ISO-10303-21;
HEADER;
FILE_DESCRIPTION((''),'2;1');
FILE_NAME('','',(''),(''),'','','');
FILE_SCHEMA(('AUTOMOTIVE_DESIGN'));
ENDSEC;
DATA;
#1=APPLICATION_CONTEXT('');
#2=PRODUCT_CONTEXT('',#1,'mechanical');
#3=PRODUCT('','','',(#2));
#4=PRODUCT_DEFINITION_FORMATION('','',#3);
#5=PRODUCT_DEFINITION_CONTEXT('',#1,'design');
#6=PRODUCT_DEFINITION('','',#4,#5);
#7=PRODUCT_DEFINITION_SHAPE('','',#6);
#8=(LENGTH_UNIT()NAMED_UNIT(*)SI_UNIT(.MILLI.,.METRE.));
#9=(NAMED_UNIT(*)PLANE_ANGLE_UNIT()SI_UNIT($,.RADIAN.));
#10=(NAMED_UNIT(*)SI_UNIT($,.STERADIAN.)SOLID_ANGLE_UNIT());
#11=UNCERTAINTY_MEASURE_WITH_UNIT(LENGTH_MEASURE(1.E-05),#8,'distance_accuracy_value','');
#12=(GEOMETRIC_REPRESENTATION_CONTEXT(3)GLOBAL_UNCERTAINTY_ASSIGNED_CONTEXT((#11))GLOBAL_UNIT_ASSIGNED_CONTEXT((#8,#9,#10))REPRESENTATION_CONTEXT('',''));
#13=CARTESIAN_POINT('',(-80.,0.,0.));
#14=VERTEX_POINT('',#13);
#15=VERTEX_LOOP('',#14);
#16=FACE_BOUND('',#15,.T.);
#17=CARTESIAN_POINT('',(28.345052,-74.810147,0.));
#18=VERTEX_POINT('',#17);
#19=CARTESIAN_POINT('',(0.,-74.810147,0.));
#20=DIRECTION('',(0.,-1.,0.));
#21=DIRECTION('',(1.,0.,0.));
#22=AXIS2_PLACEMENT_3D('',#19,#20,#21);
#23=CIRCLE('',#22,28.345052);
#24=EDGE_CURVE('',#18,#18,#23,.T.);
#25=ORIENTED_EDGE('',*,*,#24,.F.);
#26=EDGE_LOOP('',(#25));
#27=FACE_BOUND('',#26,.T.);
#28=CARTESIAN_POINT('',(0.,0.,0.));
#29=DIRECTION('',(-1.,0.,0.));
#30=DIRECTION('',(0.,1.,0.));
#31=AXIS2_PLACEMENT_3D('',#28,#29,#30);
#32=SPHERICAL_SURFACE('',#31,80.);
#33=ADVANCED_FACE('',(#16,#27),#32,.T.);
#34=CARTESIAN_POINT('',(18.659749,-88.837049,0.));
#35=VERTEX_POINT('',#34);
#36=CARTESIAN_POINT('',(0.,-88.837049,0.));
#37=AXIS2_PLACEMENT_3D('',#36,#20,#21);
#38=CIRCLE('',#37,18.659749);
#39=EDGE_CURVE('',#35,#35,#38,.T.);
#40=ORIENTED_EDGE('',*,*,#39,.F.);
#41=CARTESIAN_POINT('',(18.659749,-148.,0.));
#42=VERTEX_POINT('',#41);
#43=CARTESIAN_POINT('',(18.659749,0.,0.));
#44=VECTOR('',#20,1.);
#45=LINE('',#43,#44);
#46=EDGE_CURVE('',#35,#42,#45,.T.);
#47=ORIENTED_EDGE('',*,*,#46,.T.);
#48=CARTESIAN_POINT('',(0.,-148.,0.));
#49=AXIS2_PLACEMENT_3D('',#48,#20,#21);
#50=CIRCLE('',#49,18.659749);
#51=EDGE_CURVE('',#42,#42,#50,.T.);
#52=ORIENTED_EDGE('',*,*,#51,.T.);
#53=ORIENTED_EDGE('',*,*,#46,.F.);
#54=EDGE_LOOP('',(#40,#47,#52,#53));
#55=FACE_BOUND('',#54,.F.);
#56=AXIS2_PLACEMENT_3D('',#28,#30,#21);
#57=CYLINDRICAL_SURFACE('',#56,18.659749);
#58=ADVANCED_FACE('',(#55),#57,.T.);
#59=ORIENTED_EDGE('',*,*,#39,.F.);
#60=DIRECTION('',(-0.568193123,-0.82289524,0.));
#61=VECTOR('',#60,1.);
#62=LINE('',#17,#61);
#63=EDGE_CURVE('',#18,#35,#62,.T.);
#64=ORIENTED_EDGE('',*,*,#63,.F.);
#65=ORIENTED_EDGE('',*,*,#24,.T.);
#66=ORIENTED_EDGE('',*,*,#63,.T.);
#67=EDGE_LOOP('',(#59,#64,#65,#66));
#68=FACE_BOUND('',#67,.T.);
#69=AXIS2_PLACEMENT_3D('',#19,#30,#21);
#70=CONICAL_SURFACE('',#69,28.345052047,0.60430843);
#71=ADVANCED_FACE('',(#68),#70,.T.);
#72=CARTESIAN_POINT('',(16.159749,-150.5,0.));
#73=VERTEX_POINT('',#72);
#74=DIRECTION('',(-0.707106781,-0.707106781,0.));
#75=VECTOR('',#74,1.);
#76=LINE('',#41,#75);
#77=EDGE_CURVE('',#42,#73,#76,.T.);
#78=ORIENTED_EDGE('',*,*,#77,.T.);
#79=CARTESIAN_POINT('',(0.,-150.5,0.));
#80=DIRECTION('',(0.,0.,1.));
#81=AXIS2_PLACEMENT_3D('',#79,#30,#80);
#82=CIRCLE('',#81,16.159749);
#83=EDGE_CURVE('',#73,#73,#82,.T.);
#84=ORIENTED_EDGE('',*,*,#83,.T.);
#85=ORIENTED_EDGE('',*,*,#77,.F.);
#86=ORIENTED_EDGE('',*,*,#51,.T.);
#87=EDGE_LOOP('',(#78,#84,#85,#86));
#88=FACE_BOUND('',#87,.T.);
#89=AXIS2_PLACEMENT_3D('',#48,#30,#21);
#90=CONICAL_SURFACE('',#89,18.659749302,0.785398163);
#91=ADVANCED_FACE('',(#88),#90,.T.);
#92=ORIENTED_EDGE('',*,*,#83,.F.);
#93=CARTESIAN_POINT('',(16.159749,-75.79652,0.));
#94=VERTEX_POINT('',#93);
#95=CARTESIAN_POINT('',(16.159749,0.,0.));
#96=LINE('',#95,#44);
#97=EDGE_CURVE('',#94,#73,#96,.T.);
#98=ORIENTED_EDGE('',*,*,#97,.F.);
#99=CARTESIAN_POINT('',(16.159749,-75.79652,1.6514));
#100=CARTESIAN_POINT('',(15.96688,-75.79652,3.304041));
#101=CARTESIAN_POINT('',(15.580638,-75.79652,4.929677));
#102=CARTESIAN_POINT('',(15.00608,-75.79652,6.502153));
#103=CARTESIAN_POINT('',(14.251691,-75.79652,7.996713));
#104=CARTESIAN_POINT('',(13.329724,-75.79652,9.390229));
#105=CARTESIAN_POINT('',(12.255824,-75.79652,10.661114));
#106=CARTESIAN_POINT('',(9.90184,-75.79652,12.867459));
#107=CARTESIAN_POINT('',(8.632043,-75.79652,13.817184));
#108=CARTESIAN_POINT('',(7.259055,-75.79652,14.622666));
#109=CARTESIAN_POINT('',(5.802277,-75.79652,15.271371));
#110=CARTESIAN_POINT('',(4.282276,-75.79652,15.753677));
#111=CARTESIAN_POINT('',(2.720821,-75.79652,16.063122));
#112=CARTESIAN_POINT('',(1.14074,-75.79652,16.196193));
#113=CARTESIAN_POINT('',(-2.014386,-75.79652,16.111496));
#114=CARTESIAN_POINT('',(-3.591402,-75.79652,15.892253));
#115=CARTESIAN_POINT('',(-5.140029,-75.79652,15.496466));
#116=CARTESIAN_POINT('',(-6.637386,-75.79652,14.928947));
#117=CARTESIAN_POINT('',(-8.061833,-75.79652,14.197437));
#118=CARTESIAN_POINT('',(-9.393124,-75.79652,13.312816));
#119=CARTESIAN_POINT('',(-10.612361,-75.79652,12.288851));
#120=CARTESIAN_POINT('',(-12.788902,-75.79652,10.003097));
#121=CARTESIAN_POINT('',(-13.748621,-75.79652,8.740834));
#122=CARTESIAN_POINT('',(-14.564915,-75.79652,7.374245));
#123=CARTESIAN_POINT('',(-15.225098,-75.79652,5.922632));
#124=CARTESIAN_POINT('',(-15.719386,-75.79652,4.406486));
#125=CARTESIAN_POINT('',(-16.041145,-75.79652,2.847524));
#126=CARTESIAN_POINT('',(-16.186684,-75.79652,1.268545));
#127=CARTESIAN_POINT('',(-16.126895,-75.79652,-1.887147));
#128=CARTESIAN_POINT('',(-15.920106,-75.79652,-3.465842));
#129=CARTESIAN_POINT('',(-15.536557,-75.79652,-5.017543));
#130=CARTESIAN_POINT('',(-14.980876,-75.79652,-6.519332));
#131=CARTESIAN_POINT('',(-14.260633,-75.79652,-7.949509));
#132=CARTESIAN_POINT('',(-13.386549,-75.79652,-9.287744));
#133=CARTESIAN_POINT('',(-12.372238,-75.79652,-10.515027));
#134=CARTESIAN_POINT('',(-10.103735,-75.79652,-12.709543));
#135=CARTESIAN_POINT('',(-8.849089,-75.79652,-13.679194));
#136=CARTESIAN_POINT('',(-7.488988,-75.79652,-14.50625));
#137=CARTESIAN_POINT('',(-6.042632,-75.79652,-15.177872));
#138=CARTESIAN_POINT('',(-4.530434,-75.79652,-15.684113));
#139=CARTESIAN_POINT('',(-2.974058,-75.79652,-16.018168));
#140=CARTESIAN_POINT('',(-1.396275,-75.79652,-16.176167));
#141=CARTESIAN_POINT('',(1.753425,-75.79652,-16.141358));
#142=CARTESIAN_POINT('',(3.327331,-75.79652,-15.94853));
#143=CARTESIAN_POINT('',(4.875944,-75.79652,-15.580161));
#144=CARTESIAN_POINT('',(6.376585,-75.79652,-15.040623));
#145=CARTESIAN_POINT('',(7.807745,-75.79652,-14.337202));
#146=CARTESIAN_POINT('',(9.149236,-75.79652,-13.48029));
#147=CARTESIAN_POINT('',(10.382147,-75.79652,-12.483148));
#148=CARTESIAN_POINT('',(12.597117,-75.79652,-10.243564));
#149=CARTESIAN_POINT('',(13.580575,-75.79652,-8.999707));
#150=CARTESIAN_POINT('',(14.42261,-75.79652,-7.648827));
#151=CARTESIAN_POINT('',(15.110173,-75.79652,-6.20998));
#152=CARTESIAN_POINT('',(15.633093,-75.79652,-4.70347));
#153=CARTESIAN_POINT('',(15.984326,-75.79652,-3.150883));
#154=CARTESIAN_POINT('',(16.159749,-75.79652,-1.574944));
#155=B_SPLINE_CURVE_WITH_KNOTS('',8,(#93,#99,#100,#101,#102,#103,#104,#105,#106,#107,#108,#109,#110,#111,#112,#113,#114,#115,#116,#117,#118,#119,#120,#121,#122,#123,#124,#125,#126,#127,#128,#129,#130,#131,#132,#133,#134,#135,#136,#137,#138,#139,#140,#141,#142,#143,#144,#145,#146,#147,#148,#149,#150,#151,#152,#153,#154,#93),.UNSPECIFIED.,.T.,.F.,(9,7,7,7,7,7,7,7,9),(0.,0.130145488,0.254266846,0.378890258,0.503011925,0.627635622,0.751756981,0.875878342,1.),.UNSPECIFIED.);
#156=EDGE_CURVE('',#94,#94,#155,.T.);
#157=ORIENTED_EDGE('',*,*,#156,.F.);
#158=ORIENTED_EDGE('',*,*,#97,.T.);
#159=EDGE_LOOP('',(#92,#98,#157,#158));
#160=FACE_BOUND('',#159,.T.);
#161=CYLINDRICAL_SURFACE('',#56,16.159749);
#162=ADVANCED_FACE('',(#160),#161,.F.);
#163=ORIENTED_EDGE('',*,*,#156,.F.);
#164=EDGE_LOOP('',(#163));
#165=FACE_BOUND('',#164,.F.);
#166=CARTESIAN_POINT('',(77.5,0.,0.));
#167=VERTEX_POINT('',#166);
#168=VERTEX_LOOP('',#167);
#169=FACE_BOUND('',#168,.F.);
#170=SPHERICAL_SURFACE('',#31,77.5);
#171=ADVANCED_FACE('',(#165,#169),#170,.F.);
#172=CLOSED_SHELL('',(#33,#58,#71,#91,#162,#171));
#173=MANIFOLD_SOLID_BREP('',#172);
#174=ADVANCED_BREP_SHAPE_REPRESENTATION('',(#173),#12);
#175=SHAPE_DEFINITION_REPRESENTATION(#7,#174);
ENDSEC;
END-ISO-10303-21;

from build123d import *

# Parameters (mm, degrees)
F2_R     = 18.6597493024
F3_DEPTH = 163
F4_T     = -2.5


# Not quite as in the source:
# - a fillet or chamfer that OpenCascade refuses, or shapes differently, is made with other operations: its cross-section is extruded or revolved along the edge and cut away or added


with BuildPart() as f1:
    # F0 (on Top) → F1 (revolve)
    with BuildSketch(Plane.XY):
        with BuildLine():
            Line((-80, 0), (80, 0))
            ThreePointArc((80, 0), (0, 80), (-80, 0))
        make_face()
    revolve(axis=Axis((0, 0, 0), (-1, 0, 0)))

    # F2 (on Front) → F3 (join)
    with BuildSketch(Plane.XZ):
        Circle(F2_R)
    extrude(amount=F3_DEPTH)

    # F4
    f4_openings = [f1.faces().sort_by_distance(p)[0] for p in [
        (0, -163, 0),
    ]]
    offset(amount=F4_T, openings=f4_openings, kind=Kind.INTERSECTION)

    # F5: chamfer of 15 on 3 edges, made by hand

    # F5_s1 → F5_t2 (revolve)
    with BuildSketch(Plane.XY):
        with BuildLine():
            Line((28.3450520489, -74.8101465352), (18.6597493072, -88.8370490105))
            Line((18.6597493072, -88.8370490105), (18.6597493024, -77.7934043218))
            ThreePointArc((18.6597493024, -77.7934043218), (23.7757008768, -76.3853130389), (28.3450520489, -74.8101465352))
        make_face()
    revolve(axis=Axis((2.4e-09, -77.7934043218, -1e-10), (0, -1, 0)))

    # F5_s3 → F5_t4 (revolve, cut)
    with BuildSketch(Plane.XY):
        Polygon((18.6597493024, -148), (3.6597493024, -163), (18.6597493024, -163), align=None)
    revolve(axis=Axis((0, -163, 0), (0, -1, 0)), mode=Mode.SUBTRACT)


solid = f1.part
